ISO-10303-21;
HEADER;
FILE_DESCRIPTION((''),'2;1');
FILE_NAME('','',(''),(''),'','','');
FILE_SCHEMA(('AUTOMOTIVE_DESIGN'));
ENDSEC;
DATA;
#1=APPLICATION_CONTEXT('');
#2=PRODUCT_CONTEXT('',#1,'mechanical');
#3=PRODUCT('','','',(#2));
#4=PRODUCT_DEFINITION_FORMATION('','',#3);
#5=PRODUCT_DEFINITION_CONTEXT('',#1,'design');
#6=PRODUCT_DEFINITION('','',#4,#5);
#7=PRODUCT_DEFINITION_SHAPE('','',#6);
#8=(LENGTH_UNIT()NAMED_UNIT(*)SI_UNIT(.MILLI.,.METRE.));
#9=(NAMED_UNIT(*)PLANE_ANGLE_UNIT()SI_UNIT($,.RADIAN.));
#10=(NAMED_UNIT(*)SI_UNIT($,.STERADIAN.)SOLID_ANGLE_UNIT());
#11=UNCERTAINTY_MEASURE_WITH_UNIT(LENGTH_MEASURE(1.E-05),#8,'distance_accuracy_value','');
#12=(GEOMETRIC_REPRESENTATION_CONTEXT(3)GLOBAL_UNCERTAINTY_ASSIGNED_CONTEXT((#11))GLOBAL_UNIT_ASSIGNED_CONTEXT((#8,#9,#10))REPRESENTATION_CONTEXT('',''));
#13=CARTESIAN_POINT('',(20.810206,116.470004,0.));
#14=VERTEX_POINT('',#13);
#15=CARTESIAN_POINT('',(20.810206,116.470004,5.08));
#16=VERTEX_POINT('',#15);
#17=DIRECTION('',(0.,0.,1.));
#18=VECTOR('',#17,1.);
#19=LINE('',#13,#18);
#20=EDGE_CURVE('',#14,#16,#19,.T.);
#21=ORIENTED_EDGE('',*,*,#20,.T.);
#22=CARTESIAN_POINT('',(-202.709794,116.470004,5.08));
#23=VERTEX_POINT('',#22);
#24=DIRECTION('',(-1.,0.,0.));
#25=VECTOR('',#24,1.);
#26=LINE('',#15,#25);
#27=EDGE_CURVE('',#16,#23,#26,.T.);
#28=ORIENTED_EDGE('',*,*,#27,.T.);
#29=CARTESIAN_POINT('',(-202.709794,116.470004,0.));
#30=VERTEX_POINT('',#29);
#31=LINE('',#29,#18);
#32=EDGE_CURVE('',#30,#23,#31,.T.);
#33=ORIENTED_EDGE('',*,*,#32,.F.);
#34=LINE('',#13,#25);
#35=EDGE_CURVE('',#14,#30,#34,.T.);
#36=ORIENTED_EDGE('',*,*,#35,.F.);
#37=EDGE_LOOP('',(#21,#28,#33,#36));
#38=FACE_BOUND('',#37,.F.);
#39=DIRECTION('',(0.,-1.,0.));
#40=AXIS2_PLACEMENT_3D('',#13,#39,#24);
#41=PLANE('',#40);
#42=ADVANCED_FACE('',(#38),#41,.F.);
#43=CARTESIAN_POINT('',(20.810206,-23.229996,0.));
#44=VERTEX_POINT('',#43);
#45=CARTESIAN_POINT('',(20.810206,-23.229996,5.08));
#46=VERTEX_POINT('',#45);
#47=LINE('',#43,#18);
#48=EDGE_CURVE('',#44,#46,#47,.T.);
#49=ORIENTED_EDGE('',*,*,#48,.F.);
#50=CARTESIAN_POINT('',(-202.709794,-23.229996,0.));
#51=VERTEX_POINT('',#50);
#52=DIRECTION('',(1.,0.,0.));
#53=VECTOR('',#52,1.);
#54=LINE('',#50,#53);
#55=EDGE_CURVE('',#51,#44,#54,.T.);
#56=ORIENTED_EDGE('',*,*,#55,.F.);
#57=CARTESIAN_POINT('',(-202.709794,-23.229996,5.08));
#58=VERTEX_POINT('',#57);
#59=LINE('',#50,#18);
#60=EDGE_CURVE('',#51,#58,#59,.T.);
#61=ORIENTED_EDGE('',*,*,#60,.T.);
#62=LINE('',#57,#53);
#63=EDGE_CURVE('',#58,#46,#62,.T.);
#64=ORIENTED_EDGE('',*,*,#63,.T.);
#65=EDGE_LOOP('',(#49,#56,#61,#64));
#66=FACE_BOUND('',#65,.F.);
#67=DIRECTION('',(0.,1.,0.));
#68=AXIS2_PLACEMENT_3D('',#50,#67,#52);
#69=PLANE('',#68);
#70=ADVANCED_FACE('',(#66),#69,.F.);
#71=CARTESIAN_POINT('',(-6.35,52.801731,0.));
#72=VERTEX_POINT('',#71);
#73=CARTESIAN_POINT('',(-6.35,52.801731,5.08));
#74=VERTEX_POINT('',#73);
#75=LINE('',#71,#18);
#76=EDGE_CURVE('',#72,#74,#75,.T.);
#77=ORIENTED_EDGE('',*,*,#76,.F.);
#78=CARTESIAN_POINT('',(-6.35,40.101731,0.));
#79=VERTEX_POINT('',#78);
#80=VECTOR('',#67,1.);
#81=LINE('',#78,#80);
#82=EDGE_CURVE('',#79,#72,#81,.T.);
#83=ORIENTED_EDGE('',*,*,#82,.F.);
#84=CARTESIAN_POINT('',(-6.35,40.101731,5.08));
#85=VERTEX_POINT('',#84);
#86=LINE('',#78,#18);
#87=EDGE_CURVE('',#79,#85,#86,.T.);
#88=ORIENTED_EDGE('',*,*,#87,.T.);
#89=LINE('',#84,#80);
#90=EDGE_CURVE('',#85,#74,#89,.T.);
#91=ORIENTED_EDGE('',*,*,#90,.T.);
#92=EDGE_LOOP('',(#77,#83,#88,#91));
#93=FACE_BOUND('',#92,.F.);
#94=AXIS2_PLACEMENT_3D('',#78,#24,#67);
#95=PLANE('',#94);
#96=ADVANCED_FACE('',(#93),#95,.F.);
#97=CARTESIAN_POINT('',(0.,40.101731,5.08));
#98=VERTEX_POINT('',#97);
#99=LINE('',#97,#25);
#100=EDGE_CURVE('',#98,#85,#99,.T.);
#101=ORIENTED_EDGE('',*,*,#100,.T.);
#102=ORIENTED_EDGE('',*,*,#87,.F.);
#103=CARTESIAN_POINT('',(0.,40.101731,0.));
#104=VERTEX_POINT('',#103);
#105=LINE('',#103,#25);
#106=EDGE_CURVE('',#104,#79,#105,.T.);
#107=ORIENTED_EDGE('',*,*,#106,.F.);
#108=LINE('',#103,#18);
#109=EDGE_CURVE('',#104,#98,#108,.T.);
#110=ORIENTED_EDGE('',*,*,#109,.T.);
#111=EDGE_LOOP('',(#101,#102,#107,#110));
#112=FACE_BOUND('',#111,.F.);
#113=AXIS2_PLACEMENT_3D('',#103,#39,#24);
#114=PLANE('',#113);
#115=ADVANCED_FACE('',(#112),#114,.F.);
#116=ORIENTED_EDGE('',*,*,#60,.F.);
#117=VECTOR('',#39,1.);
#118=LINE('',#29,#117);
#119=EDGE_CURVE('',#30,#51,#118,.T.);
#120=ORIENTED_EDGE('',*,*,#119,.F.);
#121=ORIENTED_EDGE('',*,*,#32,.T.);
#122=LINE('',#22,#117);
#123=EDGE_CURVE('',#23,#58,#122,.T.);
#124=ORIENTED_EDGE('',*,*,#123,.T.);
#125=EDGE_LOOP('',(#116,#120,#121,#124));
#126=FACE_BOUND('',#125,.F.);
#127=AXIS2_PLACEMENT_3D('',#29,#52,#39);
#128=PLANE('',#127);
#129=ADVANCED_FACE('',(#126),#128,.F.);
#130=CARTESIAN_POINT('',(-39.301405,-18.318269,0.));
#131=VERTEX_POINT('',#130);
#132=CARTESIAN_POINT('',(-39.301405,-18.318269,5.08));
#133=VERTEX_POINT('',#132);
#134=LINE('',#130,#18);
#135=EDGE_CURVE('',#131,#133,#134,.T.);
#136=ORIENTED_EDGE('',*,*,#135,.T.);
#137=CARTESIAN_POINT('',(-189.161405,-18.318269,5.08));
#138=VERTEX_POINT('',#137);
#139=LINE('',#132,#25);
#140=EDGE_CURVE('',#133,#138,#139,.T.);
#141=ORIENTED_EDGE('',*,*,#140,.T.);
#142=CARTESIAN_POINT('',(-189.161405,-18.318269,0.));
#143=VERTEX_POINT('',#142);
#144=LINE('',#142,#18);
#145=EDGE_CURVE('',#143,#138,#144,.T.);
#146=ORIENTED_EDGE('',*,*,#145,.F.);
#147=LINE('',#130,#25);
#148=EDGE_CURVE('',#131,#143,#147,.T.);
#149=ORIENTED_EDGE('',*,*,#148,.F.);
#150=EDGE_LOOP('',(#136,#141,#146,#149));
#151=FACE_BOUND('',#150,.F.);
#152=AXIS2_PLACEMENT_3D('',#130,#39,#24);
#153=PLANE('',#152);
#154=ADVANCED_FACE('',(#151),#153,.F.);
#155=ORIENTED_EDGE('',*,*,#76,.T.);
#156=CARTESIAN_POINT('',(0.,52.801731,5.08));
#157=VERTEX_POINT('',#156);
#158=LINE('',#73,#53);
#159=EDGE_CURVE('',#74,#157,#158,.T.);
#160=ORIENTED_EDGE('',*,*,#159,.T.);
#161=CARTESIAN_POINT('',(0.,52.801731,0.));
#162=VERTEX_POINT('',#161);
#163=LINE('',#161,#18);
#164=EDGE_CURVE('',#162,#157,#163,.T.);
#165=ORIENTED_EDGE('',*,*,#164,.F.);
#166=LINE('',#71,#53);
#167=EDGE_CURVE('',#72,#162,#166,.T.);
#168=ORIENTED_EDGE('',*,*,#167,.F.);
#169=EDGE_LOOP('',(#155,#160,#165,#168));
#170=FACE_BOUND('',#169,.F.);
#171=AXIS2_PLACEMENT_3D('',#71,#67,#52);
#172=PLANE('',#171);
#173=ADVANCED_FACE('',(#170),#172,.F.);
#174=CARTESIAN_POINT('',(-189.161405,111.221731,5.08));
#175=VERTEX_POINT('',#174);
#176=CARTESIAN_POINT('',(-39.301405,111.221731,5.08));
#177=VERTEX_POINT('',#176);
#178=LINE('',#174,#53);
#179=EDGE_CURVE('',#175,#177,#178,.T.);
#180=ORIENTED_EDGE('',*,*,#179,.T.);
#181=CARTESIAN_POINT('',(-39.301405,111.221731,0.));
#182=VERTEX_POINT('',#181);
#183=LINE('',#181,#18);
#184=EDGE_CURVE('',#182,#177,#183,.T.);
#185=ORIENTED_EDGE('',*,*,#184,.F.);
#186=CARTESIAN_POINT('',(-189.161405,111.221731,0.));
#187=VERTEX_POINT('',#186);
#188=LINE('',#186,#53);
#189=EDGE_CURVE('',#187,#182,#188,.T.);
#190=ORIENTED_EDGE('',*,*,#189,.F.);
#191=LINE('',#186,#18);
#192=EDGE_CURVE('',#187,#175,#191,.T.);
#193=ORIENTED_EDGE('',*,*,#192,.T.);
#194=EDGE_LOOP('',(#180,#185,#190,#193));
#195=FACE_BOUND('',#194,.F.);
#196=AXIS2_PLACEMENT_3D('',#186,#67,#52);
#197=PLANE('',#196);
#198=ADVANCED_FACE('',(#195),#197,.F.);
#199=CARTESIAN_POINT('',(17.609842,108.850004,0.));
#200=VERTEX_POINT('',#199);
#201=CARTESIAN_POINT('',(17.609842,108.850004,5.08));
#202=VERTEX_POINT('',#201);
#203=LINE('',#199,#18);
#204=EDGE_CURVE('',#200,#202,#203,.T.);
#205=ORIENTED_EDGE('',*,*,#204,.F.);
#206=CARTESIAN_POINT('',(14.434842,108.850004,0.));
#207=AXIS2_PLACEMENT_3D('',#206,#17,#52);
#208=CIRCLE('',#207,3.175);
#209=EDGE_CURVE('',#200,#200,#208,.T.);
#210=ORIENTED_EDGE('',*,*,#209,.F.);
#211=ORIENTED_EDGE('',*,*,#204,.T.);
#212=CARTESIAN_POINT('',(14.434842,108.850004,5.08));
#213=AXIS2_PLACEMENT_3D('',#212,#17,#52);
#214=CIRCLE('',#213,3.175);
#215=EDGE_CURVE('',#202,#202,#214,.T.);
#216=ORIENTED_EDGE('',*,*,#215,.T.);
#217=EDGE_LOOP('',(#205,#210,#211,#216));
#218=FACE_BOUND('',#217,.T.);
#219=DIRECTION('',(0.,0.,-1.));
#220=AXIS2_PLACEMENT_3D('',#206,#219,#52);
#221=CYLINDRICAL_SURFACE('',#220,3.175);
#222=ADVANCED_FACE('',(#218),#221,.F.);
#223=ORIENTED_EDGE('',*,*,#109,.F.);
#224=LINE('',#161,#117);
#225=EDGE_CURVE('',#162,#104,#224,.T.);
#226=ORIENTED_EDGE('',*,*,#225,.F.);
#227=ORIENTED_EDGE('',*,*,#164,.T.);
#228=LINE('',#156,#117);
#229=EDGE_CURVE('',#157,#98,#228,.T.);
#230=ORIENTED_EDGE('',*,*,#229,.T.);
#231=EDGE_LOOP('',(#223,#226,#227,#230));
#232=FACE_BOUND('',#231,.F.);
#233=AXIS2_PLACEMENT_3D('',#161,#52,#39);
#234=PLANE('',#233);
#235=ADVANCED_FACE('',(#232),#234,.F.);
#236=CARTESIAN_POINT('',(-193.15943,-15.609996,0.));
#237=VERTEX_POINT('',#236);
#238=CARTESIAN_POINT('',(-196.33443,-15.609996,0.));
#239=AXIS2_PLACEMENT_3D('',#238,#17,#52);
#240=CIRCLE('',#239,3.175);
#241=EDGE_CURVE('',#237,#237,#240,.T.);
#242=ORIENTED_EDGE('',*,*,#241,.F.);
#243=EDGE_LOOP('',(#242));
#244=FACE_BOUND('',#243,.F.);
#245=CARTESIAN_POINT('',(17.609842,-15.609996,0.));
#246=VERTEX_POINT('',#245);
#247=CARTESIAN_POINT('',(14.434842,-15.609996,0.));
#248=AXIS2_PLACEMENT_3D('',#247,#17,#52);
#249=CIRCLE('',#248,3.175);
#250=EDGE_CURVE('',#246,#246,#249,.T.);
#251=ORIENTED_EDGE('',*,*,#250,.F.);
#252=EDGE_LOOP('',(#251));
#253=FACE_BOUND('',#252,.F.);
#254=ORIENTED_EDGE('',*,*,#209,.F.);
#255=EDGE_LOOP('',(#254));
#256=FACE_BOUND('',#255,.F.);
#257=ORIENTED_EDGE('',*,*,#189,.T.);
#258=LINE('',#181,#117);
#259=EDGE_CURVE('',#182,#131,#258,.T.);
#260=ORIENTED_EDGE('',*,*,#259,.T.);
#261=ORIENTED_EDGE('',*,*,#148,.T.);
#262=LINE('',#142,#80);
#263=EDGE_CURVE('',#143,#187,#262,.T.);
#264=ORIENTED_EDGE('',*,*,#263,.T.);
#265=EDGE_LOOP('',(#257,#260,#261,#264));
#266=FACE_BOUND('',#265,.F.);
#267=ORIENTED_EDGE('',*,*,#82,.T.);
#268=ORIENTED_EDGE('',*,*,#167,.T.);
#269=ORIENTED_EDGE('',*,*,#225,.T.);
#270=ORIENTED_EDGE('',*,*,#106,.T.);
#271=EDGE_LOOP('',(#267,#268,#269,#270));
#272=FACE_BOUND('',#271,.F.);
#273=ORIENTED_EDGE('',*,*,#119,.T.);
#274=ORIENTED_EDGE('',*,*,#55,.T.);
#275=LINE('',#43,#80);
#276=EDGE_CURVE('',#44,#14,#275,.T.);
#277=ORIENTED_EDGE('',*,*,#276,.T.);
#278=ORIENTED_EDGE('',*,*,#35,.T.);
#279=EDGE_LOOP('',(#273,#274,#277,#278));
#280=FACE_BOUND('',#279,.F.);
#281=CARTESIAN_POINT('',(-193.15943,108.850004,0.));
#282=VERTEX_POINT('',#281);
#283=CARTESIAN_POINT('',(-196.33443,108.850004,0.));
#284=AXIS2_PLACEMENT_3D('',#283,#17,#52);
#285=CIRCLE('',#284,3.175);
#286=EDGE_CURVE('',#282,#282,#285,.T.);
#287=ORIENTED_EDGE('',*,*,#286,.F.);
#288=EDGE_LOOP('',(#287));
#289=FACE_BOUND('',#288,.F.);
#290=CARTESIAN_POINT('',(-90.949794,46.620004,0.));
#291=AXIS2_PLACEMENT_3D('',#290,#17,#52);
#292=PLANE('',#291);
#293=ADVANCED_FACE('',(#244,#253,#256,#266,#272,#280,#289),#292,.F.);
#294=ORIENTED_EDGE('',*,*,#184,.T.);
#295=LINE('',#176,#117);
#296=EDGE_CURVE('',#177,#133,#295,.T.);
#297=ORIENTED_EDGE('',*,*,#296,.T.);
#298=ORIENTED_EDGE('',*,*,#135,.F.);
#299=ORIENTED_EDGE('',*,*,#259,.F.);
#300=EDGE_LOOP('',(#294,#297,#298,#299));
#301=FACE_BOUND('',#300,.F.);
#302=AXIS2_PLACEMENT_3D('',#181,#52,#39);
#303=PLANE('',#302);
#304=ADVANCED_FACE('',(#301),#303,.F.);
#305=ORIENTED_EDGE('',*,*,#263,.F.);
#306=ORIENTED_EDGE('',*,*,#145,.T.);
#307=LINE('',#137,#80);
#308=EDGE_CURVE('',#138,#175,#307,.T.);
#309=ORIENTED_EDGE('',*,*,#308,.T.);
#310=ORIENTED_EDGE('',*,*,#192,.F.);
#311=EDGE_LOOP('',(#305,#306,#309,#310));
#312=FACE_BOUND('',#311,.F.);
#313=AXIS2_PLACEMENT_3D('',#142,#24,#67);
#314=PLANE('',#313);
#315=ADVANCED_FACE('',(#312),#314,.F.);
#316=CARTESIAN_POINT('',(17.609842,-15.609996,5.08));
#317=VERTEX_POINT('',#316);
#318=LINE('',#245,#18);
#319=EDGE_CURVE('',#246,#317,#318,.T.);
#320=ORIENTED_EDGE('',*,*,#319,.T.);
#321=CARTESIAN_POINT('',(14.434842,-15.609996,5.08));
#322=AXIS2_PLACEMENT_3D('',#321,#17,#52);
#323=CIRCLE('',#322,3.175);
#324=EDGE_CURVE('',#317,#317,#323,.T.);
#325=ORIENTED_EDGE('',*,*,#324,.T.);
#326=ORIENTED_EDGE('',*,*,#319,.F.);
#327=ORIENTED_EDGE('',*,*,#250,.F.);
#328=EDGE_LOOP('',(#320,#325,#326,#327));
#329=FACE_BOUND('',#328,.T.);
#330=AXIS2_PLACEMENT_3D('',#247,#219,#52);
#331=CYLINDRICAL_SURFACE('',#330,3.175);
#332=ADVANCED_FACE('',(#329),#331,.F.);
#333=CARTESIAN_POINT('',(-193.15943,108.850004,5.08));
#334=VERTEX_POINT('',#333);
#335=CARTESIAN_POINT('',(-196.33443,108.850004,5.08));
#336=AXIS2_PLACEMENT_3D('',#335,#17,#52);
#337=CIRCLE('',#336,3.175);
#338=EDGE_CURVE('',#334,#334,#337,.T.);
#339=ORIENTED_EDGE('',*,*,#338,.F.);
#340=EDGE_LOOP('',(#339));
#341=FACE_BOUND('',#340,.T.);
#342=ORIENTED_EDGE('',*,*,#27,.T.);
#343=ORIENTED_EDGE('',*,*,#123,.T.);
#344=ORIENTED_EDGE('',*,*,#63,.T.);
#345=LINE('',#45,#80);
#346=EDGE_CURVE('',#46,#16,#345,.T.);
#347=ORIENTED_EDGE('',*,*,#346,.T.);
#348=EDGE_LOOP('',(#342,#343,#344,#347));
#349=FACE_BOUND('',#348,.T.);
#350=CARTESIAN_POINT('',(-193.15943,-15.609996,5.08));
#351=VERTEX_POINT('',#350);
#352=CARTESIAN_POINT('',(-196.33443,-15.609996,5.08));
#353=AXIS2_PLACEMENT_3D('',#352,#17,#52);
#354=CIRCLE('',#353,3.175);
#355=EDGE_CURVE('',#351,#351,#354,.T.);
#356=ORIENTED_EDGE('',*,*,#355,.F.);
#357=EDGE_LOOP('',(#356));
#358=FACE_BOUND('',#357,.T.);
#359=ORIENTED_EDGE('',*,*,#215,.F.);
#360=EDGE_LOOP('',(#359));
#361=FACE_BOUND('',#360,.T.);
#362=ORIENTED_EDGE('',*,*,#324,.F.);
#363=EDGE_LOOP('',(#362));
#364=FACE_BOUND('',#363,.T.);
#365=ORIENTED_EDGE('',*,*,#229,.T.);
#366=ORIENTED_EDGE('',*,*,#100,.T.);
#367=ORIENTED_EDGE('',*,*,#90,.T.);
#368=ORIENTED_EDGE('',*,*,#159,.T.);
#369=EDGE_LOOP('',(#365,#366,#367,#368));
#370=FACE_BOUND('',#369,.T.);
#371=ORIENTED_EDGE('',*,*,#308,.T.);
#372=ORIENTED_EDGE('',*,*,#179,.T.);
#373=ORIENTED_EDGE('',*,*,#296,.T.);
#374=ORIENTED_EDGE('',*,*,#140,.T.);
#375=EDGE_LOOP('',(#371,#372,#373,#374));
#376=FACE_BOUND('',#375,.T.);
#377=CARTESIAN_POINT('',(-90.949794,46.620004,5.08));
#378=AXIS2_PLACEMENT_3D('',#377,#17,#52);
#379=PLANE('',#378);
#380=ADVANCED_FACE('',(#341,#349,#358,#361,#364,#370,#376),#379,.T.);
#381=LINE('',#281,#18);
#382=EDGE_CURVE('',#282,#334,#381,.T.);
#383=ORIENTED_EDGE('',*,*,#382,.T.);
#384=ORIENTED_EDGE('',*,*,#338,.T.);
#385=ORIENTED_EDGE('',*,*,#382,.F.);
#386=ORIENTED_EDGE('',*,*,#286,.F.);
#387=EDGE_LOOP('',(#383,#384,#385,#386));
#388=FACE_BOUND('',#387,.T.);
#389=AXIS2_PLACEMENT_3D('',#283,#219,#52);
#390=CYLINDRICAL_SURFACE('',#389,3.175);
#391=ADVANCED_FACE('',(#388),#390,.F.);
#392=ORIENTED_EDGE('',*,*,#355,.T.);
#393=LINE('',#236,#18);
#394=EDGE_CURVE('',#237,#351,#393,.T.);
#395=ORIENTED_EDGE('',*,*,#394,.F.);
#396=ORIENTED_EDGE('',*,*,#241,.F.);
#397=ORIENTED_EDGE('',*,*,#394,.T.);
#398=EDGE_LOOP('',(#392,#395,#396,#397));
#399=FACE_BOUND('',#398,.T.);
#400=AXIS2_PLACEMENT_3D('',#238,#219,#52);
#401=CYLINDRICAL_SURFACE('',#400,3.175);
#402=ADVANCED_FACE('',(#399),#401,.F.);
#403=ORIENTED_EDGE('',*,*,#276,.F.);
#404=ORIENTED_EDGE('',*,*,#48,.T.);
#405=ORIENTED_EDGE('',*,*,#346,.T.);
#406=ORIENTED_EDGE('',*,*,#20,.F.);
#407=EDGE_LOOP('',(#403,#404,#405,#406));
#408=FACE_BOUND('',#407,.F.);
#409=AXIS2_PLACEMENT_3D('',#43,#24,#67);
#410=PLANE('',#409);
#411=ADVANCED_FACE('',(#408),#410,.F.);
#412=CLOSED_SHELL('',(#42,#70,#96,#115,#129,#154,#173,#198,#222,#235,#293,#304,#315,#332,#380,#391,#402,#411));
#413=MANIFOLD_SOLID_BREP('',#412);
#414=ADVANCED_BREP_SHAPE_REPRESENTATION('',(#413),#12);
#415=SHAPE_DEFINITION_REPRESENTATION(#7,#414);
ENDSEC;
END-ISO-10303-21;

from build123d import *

# Parameters (mm, degrees)
F0_R     = 3.175
F1_DEPTH = 5.08


# Not quite as in the source:
# - a feature names something its author has since deleted; it is built from what else it names


with BuildPart() as f1:
    # F0 (on Top) → F1 (new body)
    with BuildSketch(Plane.XY):
        Polygon((-196.7800016522, 116.4700038791), (-196.7814051471, 116.4700038791), (-202.7097940445, 116.4700038791), (-202.7097940445, 108.8500038791), (-202.7097940445, 101.2300038791), (-202.7097940445, -23.2299961209), (-196.7800016522, -23.2299961209), (20.8102059555, -23.2299961209), (20.8102059555, 116.4700038791), (15.3085948529, 116.4700038791), (-35.4914051471, 116.4700038791), (-39.3014051471, 116.4700038791), (-90.9497940445, 116.4700038791), (-187.4697940445, 116.4700038791), (-189.1614051471, 116.4700038791), (-195.0897940445, 116.4700038791), align=None)
        with Locations((-196.3344303894, -15.6099961209)):
            Circle(F0_R, mode=Mode.SUBTRACT)
        Polygon((-189.1614051471, -18.3182691255), (-189.1614051471, 111.2217308745), (-189.1583133745, 111.2217308745), (-39.3014051471, 111.2217308745), (-39.3014051471, -18.3182691255), align=None, mode=Mode.SUBTRACT)
        with Locations((14.4348423004, -15.6099961209)):
            Circle(F0_R, mode=Mode.SUBTRACT)
        Polygon((0, 52.8017308745), (0, 46.4517308745), (0, 40.1017308745), (-6.35, 40.1017308745), (-6.35, 46.4517308745), (-6.35, 52.8017308745), align=None, mode=Mode.SUBTRACT)
        with Locations((-196.3344303894, 108.8500038791)):
            Circle(F0_R, mode=Mode.SUBTRACT)
        with Locations((14.4348423004, 108.8500038791)):
            Circle(F0_R, mode=Mode.SUBTRACT)
    extrude(amount=F1_DEPTH)


solid = f1.part
